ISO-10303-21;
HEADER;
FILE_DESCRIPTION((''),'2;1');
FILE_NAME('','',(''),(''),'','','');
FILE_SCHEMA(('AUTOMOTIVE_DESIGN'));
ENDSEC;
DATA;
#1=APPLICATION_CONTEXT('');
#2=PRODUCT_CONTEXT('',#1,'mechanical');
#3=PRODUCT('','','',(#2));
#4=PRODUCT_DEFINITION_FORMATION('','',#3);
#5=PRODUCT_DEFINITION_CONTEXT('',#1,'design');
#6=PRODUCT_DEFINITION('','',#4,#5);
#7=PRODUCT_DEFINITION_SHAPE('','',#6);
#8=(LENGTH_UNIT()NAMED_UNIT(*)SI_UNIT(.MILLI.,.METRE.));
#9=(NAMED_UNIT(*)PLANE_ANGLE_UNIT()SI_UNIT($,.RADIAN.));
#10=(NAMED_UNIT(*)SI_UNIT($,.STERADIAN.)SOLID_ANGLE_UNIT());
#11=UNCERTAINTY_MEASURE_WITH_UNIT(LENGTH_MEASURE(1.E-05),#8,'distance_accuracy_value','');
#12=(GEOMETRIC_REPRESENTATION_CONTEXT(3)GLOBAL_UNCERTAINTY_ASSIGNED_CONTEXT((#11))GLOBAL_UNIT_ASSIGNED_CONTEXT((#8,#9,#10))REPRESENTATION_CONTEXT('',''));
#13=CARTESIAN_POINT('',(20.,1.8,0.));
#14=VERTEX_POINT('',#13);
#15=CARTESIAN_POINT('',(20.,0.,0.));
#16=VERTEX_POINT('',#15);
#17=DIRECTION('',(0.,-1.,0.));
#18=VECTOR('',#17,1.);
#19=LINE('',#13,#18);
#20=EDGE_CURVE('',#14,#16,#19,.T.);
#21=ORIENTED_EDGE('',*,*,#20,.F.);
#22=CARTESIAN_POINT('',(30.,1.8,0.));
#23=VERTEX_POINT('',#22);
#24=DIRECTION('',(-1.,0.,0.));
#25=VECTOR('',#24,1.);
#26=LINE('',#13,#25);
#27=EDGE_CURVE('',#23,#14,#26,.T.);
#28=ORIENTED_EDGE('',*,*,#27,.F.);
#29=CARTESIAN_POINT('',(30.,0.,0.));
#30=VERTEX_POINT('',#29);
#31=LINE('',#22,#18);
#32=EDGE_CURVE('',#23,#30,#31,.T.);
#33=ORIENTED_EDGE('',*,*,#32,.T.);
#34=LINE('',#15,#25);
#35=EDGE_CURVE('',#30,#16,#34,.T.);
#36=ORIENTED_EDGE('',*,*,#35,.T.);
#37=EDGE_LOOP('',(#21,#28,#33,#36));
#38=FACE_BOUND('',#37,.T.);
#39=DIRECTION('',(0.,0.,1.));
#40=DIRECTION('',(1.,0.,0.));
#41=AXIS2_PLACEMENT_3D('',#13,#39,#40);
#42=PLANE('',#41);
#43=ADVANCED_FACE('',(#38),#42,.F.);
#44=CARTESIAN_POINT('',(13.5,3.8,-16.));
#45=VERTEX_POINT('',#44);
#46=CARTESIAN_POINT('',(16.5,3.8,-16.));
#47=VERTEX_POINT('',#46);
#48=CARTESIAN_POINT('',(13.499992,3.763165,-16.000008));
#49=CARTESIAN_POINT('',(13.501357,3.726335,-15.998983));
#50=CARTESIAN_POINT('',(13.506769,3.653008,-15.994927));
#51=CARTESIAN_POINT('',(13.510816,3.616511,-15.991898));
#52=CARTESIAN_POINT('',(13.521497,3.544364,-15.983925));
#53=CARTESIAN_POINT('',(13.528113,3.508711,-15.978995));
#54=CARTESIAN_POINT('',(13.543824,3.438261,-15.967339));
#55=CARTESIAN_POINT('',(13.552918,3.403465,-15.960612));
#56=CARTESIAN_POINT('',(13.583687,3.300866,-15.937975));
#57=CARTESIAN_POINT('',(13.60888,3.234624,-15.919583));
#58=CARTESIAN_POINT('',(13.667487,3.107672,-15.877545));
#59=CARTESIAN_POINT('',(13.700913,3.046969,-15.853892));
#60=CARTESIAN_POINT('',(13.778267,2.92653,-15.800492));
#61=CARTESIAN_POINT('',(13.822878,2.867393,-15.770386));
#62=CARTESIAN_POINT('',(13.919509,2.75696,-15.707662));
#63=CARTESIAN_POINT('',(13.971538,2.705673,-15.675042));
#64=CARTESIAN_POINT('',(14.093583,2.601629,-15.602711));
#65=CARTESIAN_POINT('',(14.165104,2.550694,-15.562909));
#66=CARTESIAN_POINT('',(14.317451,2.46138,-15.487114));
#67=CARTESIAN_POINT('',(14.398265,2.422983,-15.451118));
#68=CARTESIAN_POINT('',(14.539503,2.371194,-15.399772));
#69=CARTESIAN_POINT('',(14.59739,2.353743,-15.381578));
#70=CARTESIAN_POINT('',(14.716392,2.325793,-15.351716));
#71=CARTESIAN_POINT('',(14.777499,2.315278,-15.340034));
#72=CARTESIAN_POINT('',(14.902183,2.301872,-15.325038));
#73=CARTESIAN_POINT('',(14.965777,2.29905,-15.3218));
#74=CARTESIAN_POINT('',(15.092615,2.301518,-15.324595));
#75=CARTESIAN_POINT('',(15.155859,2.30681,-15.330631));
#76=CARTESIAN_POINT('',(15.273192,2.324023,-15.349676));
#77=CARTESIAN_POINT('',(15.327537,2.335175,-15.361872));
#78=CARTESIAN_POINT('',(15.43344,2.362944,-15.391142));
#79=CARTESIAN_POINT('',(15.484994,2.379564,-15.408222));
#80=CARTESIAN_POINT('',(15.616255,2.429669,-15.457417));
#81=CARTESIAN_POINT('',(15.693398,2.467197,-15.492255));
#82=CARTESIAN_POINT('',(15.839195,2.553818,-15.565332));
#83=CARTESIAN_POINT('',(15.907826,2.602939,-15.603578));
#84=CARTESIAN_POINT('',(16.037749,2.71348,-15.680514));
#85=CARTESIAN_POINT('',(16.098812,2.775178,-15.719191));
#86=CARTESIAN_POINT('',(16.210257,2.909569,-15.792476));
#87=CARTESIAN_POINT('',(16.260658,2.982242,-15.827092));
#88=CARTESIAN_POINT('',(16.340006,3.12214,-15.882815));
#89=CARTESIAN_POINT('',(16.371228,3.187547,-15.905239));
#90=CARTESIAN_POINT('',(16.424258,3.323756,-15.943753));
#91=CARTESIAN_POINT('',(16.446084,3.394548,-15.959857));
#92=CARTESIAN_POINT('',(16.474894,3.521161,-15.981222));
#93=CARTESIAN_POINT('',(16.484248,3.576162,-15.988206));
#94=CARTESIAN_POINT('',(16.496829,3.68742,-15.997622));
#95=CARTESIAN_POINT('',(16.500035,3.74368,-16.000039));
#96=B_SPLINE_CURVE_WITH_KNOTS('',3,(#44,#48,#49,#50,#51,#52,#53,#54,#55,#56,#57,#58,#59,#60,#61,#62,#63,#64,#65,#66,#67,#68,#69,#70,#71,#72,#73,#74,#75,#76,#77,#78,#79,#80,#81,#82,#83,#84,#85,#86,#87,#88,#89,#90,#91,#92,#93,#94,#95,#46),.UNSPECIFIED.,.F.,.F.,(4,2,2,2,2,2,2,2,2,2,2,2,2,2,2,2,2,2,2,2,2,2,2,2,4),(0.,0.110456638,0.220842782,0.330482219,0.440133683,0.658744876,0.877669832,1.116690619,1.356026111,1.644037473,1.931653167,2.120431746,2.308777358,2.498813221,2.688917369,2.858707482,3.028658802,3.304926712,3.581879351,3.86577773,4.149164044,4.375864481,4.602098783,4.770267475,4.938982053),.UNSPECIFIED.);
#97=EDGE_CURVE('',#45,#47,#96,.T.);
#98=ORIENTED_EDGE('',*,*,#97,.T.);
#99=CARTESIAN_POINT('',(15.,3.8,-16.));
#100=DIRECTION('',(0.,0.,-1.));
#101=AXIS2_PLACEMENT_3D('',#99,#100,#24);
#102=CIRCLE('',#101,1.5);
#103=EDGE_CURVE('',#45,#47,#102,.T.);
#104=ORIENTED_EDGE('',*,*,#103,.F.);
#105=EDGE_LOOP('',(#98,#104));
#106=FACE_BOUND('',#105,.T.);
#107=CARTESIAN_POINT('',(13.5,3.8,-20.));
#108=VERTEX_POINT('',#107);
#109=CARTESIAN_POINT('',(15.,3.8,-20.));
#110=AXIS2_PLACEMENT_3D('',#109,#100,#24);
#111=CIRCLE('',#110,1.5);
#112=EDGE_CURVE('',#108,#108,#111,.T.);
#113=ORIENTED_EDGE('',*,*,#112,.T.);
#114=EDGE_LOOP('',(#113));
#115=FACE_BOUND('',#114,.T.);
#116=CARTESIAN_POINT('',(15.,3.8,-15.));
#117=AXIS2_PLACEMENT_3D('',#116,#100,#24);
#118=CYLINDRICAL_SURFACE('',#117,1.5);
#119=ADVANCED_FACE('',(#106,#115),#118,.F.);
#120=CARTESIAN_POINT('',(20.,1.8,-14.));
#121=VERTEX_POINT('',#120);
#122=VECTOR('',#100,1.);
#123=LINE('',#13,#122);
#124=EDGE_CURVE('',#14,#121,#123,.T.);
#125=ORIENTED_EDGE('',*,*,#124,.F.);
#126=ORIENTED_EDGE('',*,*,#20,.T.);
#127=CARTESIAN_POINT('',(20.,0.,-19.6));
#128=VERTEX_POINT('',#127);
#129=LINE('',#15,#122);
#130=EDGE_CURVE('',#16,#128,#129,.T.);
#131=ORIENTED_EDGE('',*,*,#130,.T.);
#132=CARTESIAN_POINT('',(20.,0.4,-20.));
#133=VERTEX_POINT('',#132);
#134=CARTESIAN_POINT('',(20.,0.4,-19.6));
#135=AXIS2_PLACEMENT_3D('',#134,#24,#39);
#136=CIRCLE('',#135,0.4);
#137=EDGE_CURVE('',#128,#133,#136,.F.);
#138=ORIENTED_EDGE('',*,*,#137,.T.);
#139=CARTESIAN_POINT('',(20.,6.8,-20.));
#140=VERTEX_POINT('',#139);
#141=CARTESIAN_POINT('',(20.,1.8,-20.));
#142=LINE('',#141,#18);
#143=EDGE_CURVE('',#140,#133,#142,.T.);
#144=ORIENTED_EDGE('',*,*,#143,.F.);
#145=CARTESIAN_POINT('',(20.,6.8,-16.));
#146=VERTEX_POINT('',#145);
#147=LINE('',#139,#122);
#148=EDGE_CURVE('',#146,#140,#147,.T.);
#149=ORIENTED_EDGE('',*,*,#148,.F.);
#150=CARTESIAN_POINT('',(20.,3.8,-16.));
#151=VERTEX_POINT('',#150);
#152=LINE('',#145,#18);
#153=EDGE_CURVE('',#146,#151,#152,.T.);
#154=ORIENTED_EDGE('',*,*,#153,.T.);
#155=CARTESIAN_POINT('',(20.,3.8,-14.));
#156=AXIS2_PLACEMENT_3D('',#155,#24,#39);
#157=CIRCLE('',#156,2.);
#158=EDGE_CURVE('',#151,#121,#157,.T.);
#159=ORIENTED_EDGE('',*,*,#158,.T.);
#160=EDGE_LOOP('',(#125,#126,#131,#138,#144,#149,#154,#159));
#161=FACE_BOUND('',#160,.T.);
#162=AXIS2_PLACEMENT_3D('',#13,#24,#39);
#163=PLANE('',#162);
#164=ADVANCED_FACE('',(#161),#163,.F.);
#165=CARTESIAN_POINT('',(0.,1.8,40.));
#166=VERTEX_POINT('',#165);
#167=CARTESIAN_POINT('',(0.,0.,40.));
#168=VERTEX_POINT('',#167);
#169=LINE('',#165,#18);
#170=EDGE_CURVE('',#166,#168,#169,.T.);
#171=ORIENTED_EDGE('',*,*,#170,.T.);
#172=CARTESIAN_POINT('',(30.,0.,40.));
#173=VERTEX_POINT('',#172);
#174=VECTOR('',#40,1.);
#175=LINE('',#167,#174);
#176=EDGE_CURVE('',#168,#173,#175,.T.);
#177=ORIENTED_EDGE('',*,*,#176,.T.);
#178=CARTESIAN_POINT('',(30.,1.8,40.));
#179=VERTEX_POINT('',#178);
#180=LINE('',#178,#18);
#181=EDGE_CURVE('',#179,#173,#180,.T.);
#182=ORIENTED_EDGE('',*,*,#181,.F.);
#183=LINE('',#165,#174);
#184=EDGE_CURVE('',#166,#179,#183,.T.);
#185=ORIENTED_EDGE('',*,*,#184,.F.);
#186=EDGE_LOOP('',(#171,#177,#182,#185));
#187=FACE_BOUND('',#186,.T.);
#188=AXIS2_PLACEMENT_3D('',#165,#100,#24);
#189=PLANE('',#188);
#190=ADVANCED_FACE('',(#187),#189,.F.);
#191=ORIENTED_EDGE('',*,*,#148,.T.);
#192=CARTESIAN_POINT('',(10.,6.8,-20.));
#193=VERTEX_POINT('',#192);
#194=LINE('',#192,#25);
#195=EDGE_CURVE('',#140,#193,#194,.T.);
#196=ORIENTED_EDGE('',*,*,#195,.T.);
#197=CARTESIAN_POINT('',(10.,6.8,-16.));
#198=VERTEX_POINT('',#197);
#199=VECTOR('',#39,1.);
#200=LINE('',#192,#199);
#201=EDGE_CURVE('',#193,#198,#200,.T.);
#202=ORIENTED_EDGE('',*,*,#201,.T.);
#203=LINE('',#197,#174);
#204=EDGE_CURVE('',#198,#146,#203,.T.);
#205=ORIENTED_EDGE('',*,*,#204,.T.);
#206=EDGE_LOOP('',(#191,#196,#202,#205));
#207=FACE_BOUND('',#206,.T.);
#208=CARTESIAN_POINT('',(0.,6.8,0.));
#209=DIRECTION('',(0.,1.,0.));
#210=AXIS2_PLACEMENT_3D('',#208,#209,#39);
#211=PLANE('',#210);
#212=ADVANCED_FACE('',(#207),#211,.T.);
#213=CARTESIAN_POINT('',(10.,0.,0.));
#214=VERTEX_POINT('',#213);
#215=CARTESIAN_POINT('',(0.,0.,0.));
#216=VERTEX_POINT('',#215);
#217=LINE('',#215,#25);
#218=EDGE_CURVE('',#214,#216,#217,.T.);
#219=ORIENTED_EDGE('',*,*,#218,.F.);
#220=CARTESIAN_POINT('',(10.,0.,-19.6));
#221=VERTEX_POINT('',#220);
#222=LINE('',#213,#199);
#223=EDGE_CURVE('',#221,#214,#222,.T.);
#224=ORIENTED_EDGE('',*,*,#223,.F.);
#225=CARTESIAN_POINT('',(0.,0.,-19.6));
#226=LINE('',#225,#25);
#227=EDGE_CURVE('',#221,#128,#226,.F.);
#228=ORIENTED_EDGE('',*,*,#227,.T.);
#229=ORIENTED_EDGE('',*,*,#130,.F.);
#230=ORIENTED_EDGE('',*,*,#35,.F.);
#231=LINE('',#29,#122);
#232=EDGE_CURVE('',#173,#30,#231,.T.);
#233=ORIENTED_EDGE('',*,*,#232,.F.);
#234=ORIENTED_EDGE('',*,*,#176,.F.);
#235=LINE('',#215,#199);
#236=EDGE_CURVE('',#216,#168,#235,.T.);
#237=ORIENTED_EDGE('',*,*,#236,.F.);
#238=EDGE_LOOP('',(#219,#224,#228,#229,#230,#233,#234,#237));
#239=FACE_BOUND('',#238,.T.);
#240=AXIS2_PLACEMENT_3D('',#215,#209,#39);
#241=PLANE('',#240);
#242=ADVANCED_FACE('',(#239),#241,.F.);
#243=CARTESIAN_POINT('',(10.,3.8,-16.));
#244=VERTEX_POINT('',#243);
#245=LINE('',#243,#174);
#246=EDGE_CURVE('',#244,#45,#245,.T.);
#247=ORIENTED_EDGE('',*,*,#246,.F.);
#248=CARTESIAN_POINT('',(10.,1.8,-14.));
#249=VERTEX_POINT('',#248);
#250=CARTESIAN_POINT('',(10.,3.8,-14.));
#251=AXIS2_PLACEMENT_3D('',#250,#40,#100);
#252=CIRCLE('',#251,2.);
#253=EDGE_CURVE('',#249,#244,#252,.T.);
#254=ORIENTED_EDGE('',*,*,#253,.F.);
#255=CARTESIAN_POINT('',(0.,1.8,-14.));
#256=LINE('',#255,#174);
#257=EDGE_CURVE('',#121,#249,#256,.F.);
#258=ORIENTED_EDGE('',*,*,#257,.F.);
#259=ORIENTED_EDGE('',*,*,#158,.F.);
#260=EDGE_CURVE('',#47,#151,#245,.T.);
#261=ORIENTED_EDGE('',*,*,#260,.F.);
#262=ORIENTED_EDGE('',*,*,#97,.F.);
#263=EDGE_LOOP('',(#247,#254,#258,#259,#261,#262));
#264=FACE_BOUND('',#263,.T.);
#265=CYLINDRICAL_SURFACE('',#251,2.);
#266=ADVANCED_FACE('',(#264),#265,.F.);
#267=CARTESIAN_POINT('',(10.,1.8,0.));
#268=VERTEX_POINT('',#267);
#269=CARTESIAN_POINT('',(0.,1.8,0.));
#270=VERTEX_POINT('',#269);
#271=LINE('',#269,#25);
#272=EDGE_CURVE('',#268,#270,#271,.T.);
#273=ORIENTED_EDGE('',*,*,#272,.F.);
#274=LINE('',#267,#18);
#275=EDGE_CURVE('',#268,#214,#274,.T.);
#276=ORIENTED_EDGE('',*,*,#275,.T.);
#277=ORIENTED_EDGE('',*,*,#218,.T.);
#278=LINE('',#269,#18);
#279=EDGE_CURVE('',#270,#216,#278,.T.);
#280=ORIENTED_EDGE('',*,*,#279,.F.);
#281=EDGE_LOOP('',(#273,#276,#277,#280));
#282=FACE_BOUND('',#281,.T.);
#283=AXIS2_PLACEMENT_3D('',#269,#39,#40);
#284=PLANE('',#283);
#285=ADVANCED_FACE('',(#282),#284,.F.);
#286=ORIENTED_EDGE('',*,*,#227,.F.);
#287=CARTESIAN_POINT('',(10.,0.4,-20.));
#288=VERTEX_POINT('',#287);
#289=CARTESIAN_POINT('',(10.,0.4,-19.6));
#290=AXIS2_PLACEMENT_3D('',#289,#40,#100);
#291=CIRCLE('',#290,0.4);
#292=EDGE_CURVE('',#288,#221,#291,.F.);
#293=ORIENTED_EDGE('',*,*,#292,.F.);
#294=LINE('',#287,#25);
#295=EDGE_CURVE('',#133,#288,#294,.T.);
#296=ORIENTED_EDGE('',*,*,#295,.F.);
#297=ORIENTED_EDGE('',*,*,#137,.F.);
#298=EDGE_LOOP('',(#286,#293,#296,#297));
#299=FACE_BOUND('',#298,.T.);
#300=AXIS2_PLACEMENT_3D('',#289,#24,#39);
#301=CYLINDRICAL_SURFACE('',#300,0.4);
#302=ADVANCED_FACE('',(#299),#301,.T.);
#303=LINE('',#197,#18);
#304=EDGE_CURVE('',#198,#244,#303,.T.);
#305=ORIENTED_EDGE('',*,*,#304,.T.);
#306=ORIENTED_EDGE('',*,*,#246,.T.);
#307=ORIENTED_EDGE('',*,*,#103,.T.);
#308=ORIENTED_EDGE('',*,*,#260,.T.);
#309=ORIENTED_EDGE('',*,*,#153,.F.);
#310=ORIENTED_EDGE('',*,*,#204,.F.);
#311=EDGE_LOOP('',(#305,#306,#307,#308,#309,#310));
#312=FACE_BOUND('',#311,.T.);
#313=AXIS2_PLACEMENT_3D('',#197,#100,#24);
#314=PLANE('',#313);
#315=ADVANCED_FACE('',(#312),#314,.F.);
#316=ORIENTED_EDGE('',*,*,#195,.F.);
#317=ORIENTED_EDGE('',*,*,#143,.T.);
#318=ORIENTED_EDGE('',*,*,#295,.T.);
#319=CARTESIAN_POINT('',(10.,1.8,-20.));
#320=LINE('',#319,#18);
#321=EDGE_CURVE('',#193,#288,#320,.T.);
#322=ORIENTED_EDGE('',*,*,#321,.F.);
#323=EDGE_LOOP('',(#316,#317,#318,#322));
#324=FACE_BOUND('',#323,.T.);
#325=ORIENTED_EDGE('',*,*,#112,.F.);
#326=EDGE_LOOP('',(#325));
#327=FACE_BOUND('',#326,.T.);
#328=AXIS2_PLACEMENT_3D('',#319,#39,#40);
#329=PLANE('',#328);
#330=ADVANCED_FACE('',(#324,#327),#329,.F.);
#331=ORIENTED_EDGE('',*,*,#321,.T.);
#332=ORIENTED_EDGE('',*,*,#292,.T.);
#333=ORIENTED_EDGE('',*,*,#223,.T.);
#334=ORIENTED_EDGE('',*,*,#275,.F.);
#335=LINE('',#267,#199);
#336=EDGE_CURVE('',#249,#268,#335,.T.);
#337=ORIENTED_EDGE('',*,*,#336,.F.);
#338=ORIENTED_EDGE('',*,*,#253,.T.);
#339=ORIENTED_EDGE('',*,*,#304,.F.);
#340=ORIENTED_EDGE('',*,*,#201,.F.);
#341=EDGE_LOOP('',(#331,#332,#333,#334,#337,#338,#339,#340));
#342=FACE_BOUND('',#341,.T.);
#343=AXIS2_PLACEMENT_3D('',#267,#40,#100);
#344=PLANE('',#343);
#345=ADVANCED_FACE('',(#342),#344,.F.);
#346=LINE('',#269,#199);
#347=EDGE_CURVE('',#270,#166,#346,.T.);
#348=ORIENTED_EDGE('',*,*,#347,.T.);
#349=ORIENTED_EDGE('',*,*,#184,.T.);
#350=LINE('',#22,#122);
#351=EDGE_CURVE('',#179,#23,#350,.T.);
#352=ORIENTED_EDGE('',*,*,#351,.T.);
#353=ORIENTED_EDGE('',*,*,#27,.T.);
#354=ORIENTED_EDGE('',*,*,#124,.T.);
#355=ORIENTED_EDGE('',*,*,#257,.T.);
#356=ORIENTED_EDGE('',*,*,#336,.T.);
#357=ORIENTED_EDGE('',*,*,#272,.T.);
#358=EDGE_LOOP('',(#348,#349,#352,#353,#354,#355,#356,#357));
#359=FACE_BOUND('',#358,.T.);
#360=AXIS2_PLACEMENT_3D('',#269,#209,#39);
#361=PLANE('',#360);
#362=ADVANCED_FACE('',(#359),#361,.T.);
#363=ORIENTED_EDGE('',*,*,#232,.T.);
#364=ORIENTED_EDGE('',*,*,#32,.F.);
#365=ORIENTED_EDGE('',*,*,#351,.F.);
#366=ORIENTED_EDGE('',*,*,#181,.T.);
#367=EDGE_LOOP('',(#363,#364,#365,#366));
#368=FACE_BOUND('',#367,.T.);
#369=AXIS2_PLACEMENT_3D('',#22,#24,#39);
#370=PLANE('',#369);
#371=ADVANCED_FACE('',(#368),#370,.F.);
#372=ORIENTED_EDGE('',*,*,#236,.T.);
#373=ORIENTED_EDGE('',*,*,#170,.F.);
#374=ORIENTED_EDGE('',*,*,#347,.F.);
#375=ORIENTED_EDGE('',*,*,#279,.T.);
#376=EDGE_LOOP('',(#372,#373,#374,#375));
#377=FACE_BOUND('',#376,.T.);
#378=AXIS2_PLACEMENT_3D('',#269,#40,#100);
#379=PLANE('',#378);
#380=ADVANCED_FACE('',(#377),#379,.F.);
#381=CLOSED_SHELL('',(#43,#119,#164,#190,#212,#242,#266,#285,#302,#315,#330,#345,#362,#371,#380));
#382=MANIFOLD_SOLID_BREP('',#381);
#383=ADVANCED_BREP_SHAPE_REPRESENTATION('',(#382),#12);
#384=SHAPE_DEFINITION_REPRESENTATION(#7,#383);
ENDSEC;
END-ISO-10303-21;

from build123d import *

# Parameters (mm, degrees)
BOSS_EXTRUDE1_DEPTH = 1.8
SKETCH2_W           = 10
SKETCH2_H           = 4
BOSS_EXTRUDE2_DEPTH = 5
SKETCH3_R           = 1.5
CUT_EXTRUDE1_DEPTH  = 5
FILLET1_R           = 2
FILLET2_R           = 0.4


with BuildPart() as part:
    # Sketch1 → Boss-Extrude1 (new body)
    with BuildSketch(Plane(origin=(0, 0, 0), x_dir=(1, 0, 0), z_dir=(0, 1, 0))):
        Polygon((20, 0), (30, 0), (30, -40), (0, -40), (0, 0), (10, 0), (10, 20), (20, 20), align=None)
    extrude(amount=BOSS_EXTRUDE1_DEPTH)

    # Sketch2 → Boss-Extrude2 (add)
    with BuildSketch(Plane(origin=(0, 1.8, 0), x_dir=(1, 0, 0), z_dir=(0, 1, 0))):
        with Locations((15, 18)):
            Rectangle(SKETCH2_W, SKETCH2_H)
    extrude(amount=BOSS_EXTRUDE2_DEPTH)

    # Sketch3 → Cut-Extrude1 (cut)
    with BuildSketch(Plane(origin=(0, 0, -20), x_dir=(-1, 0, 0), z_dir=(0, 0, -1))):
        with Locations((-15, 3.8)):
            Circle(SKETCH3_R)
    extrude(amount=-CUT_EXTRUDE1_DEPTH, mode=Mode.SUBTRACT)

    # Fillet1
    # the kernel refuses this fillet: 2 mm, written as the material it adds along each edge
    with BuildSketch(Plane(origin=(20, 1.8, -16), x_dir=(0, 0, 1), z_dir=(-1, 0, 0))) as fillet1_piece_1_section:
        with BuildLine():
            CenterArc((FILLET1_R, FILLET1_R), FILLET1_R, 180, 90)
            Line((0, FILLET1_R), (0, 0))
            Line((0, 0), (FILLET1_R, 0))
        make_face()
    fillet1_piece_1 = extrude(amount=10, mode=Mode.PRIVATE)
    fillet1_piece_1 = fillet1_piece_1 - Plane(origin=(15, 3.8, -15.523581598), x_dir=(-1, 0, 0), z_dir=(0, 0, -1)) * Cylinder(1.5, 28, mode=Mode.PRIVATE)
    add(fillet1_piece_1)

    # Fillet2
    fillet2_edges = [part.edges().sort_by_distance(p)[0] for p in [
        (15, 0, -20),
    ]]
    fillet(fillet2_edges, radius=FILLET2_R)


solid = part.part
